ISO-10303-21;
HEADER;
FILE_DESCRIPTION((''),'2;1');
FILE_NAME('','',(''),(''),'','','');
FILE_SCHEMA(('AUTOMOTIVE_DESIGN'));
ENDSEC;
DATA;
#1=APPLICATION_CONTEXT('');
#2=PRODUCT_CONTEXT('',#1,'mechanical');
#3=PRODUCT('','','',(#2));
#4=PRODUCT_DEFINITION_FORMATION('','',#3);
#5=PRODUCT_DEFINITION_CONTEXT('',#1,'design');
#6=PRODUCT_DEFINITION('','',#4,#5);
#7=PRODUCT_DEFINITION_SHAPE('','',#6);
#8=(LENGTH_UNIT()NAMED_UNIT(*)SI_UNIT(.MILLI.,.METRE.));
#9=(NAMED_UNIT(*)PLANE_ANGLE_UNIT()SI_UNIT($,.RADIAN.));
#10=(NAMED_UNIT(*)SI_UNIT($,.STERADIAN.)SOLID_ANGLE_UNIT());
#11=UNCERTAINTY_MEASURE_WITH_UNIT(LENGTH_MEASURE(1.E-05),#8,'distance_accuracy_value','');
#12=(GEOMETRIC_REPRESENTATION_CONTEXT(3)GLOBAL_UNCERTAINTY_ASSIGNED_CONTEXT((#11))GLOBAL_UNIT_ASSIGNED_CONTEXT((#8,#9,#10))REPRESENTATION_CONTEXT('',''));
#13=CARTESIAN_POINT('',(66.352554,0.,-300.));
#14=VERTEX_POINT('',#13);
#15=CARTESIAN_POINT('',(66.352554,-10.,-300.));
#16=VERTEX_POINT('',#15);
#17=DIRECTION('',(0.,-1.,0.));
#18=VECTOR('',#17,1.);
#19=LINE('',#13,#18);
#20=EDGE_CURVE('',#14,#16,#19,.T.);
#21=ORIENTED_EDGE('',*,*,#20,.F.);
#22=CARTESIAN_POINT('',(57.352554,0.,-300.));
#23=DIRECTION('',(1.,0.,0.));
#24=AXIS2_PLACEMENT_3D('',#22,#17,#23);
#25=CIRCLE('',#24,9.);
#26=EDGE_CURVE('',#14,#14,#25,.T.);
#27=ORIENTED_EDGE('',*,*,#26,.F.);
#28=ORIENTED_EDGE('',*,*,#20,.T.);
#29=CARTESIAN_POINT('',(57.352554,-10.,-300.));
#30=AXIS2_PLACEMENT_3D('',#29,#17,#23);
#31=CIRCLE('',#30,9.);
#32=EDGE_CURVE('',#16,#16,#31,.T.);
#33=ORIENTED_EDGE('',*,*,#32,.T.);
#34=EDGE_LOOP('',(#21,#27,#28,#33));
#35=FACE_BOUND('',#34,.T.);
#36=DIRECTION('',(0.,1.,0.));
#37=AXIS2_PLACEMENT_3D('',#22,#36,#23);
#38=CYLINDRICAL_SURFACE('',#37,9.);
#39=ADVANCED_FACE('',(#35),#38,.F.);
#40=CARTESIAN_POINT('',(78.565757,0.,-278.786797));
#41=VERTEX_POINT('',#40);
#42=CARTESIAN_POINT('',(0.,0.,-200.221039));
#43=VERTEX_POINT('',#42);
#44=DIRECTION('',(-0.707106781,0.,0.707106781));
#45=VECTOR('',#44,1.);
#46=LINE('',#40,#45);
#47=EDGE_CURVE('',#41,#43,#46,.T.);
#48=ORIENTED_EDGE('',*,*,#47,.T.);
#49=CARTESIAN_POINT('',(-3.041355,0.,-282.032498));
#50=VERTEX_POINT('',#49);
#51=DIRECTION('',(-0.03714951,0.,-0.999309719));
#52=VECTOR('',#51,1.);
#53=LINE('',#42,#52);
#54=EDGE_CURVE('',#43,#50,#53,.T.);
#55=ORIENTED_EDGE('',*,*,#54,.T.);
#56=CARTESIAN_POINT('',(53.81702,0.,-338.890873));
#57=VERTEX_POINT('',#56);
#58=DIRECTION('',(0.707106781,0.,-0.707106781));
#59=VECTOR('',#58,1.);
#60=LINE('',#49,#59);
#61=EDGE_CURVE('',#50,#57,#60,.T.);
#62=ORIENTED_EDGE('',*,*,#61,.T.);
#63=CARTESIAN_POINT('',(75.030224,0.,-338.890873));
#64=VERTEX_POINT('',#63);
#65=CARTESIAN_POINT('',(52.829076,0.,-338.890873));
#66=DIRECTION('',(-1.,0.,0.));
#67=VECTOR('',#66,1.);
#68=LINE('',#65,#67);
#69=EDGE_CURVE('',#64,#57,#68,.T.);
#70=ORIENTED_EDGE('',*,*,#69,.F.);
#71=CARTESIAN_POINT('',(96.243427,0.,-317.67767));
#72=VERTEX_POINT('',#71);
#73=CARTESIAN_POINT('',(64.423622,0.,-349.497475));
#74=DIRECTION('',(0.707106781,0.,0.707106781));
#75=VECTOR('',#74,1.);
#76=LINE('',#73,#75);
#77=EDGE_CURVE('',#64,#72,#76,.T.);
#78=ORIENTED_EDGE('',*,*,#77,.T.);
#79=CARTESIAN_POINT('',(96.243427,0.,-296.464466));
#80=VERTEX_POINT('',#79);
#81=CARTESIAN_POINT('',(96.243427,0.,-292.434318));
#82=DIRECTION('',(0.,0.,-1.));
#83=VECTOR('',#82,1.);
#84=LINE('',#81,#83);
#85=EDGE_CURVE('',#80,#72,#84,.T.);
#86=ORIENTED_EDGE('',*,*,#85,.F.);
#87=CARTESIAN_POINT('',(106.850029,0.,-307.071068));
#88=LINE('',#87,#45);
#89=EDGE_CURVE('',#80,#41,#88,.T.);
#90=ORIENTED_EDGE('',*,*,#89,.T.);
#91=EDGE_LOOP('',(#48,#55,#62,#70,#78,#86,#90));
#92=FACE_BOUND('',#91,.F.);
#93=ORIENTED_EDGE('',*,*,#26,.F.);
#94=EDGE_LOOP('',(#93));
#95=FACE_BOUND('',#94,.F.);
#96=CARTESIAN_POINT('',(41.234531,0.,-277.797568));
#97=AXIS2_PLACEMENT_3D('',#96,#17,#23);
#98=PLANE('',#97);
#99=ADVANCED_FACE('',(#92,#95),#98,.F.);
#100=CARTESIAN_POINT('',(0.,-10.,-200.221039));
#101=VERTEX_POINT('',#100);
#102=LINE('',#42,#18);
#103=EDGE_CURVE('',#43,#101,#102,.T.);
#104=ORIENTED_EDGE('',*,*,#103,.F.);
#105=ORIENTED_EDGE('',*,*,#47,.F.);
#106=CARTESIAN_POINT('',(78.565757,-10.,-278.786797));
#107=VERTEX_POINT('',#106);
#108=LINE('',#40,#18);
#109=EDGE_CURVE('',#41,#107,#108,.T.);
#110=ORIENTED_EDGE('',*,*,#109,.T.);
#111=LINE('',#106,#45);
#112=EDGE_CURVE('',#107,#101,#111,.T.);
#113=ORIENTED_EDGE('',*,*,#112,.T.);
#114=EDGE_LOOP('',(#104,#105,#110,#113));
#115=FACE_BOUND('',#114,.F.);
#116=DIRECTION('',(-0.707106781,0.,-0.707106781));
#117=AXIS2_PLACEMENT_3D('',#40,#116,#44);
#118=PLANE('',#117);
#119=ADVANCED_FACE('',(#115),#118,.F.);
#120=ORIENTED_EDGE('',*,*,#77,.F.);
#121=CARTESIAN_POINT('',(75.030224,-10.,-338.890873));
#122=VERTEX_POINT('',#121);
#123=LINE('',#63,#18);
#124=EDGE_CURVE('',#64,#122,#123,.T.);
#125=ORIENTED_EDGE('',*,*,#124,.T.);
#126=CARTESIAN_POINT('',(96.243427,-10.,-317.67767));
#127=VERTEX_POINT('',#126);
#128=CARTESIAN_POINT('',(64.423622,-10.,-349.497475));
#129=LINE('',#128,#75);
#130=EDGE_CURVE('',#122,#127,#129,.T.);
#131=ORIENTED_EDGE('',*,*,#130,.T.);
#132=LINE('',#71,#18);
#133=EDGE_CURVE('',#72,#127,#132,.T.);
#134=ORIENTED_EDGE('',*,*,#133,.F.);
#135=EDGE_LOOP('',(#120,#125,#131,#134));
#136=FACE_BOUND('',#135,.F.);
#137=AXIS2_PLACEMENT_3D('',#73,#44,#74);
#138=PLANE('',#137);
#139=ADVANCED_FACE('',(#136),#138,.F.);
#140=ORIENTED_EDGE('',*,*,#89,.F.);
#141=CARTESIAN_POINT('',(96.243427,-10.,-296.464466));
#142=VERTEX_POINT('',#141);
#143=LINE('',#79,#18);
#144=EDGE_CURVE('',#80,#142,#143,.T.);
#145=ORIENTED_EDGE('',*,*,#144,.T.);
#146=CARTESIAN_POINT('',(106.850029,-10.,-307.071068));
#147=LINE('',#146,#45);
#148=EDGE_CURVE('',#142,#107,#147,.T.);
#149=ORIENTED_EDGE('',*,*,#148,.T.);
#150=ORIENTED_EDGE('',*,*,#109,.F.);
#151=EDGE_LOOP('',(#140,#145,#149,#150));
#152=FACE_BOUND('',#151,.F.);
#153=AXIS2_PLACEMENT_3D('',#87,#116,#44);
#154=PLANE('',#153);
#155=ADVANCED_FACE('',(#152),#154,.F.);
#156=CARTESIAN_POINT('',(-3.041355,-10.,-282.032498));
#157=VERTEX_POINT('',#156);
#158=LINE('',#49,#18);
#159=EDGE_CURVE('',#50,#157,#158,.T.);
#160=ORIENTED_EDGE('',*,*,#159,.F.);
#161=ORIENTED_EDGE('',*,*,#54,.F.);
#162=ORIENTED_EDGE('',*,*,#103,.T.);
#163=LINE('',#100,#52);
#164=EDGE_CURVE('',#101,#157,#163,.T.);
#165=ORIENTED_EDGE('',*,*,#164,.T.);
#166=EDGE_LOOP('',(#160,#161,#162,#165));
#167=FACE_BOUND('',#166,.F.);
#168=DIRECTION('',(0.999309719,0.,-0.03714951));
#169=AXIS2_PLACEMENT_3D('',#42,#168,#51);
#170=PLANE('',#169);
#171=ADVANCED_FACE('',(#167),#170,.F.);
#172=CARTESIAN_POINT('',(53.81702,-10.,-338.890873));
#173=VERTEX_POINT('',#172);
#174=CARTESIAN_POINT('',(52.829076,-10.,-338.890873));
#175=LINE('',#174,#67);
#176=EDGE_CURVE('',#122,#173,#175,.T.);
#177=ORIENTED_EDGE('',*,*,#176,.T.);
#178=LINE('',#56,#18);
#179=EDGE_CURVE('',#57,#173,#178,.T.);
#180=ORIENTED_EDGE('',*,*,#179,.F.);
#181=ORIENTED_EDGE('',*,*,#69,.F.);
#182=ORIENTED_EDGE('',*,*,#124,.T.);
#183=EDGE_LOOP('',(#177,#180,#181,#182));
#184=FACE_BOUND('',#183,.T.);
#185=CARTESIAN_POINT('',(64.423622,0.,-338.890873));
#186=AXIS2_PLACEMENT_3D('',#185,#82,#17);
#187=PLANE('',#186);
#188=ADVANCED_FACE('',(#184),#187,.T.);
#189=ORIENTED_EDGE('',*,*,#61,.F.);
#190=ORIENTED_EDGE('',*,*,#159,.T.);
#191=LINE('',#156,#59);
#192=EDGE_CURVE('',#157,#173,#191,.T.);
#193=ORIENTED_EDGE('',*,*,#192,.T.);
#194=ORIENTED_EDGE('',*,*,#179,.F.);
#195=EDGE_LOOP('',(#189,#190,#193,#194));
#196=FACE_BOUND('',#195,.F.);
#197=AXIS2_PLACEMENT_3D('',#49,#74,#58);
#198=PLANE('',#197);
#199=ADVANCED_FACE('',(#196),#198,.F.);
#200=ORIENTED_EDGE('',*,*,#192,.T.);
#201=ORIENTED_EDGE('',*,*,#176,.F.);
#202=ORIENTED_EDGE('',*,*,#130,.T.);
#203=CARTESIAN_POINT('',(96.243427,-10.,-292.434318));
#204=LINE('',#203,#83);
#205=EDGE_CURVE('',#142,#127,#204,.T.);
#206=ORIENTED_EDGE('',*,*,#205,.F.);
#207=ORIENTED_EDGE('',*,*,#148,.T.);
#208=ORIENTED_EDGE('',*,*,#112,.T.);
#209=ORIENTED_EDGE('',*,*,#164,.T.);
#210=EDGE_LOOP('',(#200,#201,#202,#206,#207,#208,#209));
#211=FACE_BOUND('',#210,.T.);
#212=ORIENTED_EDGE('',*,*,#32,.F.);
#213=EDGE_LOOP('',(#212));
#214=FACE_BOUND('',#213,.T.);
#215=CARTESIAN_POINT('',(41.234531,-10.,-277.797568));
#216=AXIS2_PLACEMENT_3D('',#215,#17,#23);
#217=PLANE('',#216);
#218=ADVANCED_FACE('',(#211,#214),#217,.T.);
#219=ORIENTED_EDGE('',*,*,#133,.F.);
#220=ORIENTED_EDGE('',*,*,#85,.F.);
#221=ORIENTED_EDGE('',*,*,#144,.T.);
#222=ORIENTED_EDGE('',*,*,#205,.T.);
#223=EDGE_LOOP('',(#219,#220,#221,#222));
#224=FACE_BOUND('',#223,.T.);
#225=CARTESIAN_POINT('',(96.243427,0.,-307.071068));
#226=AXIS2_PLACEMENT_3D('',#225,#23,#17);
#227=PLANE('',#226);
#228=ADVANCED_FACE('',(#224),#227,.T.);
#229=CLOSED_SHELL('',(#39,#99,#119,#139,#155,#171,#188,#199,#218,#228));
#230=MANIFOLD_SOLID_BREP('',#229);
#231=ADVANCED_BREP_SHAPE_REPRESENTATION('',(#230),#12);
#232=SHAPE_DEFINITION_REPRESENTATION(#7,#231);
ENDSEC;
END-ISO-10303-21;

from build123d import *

# Parameters (mm, degrees)
F0_R     = 9
F1_DEPTH = 10
F2_SIZE  = 15


with BuildPart() as f1:
    # F0 (on Front) → F1 (new body)
    with BuildSketch(Plane.XZ):
        Polygon((106.8500287361, -307.0710678119), (78.5657574887, -278.7867965644), (0, -200.2210390757), (-3.0413549592, -282.0324978589), (64.4236218649, -349.4974746831), align=None)
        with Locations((57.3525540531, -300)):
            Circle(F0_R, mode=Mode.SUBTRACT)
    extrude(amount=F1_DEPTH)

    # F2
    f2_edges = [f1.edges().sort_by_distance(p)[0] for p in [
        (106.850029, -5, -307.071068),
        (64.423622, -5, -349.497475),
    ]]
    chamfer(f2_edges, length=F2_SIZE)


solid = f1.part
